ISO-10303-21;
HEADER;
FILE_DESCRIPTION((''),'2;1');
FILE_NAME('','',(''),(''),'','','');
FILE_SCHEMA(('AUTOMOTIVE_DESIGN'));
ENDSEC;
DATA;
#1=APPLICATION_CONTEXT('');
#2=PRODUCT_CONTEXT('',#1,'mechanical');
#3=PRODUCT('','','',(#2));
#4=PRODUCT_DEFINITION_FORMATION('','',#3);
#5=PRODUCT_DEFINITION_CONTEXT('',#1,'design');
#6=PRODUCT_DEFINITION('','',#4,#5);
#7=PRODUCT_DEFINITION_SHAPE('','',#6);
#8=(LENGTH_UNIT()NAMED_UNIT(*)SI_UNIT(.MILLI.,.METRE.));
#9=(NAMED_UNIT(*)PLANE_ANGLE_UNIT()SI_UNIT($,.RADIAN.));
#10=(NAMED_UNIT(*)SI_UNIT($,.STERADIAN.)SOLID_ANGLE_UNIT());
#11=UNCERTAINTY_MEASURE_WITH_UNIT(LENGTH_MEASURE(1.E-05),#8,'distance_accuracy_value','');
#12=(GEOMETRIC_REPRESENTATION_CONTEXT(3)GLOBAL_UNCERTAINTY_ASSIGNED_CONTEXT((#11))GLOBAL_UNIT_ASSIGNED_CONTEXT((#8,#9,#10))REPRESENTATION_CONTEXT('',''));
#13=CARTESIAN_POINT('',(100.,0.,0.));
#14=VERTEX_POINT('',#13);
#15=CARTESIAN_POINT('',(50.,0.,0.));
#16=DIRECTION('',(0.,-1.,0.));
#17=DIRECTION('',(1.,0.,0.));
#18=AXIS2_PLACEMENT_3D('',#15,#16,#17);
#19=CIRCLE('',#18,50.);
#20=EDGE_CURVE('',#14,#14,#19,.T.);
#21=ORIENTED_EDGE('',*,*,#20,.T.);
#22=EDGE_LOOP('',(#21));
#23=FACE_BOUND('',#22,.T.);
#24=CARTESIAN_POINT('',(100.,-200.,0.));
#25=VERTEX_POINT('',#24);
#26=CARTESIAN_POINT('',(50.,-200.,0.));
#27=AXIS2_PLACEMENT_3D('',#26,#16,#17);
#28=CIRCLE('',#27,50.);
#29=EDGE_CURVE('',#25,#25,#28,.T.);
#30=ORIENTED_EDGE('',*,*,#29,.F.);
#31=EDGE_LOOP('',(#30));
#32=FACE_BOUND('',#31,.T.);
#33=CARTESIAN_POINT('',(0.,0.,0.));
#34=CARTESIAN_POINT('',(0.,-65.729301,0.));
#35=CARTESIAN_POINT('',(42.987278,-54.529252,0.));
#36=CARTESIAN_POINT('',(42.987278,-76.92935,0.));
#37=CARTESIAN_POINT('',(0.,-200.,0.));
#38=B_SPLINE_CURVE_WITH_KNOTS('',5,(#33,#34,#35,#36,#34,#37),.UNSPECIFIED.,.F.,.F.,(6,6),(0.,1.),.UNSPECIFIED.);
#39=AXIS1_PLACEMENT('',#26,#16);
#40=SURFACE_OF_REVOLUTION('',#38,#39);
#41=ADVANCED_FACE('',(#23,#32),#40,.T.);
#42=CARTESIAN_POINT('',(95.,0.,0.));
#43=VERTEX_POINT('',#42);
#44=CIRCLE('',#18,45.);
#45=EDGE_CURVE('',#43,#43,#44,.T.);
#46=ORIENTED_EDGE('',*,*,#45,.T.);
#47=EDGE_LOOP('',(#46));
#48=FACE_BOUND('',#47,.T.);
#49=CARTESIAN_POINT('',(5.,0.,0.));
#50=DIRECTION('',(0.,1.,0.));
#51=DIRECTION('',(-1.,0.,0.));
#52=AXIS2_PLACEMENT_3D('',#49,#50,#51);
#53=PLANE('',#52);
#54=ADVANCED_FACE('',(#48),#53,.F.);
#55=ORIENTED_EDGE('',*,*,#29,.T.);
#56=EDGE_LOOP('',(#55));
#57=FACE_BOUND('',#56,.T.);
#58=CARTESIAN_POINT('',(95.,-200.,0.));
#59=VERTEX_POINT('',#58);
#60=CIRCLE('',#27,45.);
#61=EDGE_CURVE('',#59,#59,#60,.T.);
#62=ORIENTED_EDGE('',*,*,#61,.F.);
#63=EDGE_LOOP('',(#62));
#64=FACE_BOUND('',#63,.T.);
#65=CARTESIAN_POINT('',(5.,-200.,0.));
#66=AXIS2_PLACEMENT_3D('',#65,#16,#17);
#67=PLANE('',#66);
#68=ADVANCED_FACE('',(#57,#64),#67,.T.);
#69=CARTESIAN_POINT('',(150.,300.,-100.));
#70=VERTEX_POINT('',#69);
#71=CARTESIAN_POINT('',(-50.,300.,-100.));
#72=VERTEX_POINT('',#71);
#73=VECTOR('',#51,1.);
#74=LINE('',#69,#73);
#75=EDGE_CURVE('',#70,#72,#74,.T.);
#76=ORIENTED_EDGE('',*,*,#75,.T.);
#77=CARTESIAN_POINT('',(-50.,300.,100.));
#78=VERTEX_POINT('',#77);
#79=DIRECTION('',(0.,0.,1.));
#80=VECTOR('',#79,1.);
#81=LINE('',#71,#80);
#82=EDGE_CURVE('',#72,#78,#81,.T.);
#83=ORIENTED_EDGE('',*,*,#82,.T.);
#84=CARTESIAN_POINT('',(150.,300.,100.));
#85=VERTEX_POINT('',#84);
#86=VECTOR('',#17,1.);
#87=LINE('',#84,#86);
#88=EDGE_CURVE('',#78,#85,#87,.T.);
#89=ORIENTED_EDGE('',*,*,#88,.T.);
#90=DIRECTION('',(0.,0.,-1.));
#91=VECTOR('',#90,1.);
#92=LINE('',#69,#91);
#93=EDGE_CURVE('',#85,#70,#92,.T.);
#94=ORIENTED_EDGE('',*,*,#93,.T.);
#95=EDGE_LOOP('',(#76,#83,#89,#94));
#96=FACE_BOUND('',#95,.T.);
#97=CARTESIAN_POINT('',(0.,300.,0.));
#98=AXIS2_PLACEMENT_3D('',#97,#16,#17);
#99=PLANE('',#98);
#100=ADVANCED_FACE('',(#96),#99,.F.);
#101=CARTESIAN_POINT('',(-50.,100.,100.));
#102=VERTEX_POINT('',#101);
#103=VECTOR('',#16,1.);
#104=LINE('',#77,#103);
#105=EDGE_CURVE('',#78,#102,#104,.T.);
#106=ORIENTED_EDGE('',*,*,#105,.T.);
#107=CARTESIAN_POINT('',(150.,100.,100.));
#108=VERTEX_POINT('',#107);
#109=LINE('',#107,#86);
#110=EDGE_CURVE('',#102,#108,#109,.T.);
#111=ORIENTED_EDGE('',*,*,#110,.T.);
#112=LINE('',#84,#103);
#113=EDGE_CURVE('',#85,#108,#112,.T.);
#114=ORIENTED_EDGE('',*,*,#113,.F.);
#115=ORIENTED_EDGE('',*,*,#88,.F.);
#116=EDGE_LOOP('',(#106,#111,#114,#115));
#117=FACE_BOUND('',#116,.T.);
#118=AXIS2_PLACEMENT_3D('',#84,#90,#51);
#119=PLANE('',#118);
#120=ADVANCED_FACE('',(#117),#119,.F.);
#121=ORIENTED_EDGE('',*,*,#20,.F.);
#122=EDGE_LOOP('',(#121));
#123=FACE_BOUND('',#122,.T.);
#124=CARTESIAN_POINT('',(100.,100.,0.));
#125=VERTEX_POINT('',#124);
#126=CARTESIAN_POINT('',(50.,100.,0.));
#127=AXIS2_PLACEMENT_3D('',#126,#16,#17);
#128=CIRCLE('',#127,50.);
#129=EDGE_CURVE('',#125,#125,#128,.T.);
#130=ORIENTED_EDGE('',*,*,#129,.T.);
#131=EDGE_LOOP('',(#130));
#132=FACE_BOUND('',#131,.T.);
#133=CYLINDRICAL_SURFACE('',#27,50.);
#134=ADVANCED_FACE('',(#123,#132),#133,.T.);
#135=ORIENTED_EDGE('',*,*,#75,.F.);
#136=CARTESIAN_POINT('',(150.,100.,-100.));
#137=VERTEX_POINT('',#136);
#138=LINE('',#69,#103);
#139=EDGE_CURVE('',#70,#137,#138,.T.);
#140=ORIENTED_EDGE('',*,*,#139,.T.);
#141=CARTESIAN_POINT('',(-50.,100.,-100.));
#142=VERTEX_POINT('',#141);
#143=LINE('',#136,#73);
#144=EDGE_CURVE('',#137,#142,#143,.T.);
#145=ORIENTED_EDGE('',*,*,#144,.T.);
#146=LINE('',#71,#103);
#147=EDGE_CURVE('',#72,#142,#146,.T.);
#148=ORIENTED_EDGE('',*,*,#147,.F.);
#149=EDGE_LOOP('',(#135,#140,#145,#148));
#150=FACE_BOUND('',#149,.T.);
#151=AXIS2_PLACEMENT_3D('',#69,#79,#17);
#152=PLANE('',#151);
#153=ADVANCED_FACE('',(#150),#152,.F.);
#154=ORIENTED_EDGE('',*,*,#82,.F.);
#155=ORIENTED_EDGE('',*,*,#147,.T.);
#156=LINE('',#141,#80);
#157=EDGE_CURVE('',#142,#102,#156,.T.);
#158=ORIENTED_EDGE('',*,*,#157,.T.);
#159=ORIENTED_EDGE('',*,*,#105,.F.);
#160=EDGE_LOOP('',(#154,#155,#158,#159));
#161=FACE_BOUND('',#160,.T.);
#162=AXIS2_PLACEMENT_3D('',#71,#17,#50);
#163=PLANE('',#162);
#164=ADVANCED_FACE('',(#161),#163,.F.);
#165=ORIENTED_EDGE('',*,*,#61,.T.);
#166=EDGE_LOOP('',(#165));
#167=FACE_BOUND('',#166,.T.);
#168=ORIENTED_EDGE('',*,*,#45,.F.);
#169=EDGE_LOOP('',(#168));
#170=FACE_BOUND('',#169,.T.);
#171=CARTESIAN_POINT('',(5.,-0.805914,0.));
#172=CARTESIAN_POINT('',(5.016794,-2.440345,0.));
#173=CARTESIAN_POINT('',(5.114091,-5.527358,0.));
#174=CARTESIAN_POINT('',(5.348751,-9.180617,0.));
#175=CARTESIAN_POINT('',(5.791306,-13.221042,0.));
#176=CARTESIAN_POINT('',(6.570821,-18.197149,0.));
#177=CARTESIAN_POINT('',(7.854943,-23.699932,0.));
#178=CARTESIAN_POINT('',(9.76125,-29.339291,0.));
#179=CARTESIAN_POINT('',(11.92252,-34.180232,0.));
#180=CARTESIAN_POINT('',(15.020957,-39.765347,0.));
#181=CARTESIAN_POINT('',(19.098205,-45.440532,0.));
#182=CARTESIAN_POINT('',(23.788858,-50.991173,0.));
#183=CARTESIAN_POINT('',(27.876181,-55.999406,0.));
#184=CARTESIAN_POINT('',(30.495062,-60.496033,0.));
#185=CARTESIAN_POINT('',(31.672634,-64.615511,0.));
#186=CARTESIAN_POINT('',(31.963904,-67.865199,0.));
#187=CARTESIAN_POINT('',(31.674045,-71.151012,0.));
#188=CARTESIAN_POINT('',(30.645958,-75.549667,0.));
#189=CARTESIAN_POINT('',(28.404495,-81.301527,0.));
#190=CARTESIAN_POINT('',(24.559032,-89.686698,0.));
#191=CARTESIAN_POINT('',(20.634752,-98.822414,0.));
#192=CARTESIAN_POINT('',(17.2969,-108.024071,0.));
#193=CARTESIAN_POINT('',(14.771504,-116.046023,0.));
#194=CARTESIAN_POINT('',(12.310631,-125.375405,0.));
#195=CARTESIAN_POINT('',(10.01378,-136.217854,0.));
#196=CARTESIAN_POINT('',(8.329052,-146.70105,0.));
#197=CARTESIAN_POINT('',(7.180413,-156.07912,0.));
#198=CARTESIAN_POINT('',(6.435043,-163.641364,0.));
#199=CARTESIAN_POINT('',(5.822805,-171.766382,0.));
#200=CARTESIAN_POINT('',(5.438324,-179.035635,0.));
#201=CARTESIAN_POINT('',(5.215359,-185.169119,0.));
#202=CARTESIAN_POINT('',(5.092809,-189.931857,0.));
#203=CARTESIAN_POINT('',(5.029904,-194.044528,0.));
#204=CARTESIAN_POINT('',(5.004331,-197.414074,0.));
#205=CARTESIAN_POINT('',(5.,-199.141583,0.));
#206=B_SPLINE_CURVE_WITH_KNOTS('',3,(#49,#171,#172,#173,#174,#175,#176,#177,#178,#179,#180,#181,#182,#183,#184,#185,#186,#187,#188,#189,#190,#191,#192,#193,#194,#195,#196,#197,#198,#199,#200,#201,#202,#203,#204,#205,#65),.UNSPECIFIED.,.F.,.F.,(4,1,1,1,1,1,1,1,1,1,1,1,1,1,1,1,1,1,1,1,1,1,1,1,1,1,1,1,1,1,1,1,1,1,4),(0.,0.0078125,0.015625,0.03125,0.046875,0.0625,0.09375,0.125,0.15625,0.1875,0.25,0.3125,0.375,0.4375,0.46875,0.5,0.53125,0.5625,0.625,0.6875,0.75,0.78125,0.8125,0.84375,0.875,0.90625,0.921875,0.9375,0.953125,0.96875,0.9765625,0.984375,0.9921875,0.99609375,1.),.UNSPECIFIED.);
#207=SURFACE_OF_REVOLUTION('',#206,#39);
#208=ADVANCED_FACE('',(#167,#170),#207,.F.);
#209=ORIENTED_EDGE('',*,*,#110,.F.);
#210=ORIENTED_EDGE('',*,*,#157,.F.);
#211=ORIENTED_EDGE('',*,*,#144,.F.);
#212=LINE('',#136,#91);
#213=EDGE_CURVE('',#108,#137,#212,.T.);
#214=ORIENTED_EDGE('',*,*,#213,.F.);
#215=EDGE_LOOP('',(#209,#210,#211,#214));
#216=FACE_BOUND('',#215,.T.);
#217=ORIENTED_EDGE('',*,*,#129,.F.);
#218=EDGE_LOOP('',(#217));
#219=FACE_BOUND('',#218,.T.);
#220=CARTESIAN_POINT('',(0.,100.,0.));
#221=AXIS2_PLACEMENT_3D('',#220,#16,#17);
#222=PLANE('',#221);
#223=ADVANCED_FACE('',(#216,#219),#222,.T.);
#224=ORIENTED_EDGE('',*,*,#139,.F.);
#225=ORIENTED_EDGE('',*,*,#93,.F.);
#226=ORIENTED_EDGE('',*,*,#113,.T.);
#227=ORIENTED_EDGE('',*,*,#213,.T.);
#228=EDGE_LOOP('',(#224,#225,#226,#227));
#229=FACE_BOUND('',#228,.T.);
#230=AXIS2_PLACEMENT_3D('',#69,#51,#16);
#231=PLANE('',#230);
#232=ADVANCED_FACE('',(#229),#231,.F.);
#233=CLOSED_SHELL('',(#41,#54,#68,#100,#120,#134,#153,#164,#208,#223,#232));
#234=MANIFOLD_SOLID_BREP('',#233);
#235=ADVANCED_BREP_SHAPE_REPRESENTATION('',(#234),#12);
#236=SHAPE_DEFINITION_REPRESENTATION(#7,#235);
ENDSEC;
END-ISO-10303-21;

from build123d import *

# Parameters (mm, degrees)
REVOLVE1_OUTLINE_W   = 5
REVOLVE1_OUTLINE_H   = 100
REVOLVE1_OUTLINE_W_2 = 45
SKETCH2_W            = 200
SKETCH2_H            = 200
BOSS_EXTRUDE1_DEPTH  = 200


# Read off the part's stored shape, not the designer's step: Revolve1
with BuildPart() as part:
    # Revolve1 outline → Revolve1 (revolve)
    with BuildSketch(Plane(origin=(50, 0, 0), x_dir=(1, 0, 0), z_dir=(0, 0, 1))):
        with Locations((47.5, 50)):
            Rectangle(REVOLVE1_OUTLINE_W, REVOLVE1_OUTLINE_H)
        with BuildLine():
            add(Edge.make_bspline(
                [(50, 0), (50, -8.082762567), (49.349957781, -15.002219913), (48.209745328, -20.96390459), (46.719575094, -26.132708235), (45, -30.644804173)],
                knots=[0, 0, 0, 0, 0, 0, 0.122970463, 0.122970463, 0.122970463, 0.122970463, 0.122970463, 0.122970463], degree=5))
            Line((50, 0), (45, 0))
            Line((45, 0), (45, -30.644804173))
        make_face()
        with Locations((22.5, 50)):
            Rectangle(REVOLVE1_OUTLINE_W_2, REVOLVE1_OUTLINE_H)
        with BuildLine():
            add(Edge.make_bspline(
                [(45, -30.644804173), (34.455506857, -58.313130409), (15.284968329, -61.288036888), (15.284968329, -70.967793904), (34.455506857, -78.145887533), (45, -136.380827106)],
                knots=[0.122970463, 0.122970463, 0.122970463, 0.122970463, 0.122970463, 0.122970463, 0.877029537, 0.877029537, 0.877029537, 0.877029537, 0.877029537, 0.877029537], degree=5))
            Line((45, -30.644804173), (45, 0))
            add(Edge.make_bspline(
                [(45, 0), (45, -0.805913513), (44.983206143, -2.440345101), (44.885909174, -5.527357683), (44.651249209, -9.180617017), (44.208693768, -13.22104238), (43.429179035, -18.197149025), (42.145056936, -23.699932493), (40.238749724, -29.339291486), (38.077480396, -34.180232479), (34.979043101, -39.765346635), (30.901795474, -45.44053167), (26.211141954, -50.99117289), (22.123818579, -55.99940601), (19.504937862, -60.49603289), (18.327366237, -64.615511375), (18.036096382, -67.865198675), (18.325954828, -71.151011846), (19.354041911, -75.549666709), (21.595505158, -81.301527469), (25.440968359, -89.686697726), (29.365247929, -98.822414083), (32.703100041, -108.024070812), (35.228496377, -116.046022636), (37.689368772, -125.375404851), (39.98622015, -136.217854158), (41.670948279, -146.701049549), (42.819586689, -156.079119992), (43.564957316, -163.641363627), (44.177194916, -171.766381725), (44.561675987, -179.035635061), (44.784641201, -185.169118612), (44.907191495, -189.931856825), (44.970095656, -194.044527702), (44.995668899, -197.414073857), (45, -199.141583294), (45, -200)],
                knots=[0, 0, 0, 0, 0.0078125, 0.015625, 0.03125, 0.046875, 0.0625, 0.09375, 0.125, 0.15625, 0.1875, 0.25, 0.3125, 0.375, 0.4375, 0.46875, 0.5, 0.53125, 0.5625, 0.625, 0.6875, 0.75, 0.78125, 0.8125, 0.84375, 0.875, 0.90625, 0.921875, 0.9375, 0.953125, 0.96875, 0.9765625, 0.984375, 0.9921875, 0.99609375, 1, 1, 1, 1], degree=3))
            Line((45, -200), (45, -136.380827106))
        make_face()
        with BuildLine():
            Line((45, -200), (50, -200))
            add(Edge.make_bspline(
                [(45, -136.380827106), (46.719575094, -145.877665912), (48.209745328, -156.732333022), (49.349957781, -169.177110028), (50, -183.488669983), (50, -200)],
                knots=[0.877029537, 0.877029537, 0.877029537, 0.877029537, 0.877029537, 0.877029537, 1, 1, 1, 1, 1, 1], degree=5))
            Line((45, -136.380827106), (45, -200))
        make_face()
    revolve(axis=Axis((50, 0, 0), (0, 1, 0)))

    # Sketch2 → Boss-Extrude1 (add)
    with BuildSketch(Plane(origin=(0, 100, 0), x_dir=(1, 0, 0), z_dir=(0, 1, 0))):
        with Locations((50, 0)):
            Rectangle(SKETCH2_W, SKETCH2_H)
    extrude(amount=BOSS_EXTRUDE1_DEPTH)


solid = part.part
